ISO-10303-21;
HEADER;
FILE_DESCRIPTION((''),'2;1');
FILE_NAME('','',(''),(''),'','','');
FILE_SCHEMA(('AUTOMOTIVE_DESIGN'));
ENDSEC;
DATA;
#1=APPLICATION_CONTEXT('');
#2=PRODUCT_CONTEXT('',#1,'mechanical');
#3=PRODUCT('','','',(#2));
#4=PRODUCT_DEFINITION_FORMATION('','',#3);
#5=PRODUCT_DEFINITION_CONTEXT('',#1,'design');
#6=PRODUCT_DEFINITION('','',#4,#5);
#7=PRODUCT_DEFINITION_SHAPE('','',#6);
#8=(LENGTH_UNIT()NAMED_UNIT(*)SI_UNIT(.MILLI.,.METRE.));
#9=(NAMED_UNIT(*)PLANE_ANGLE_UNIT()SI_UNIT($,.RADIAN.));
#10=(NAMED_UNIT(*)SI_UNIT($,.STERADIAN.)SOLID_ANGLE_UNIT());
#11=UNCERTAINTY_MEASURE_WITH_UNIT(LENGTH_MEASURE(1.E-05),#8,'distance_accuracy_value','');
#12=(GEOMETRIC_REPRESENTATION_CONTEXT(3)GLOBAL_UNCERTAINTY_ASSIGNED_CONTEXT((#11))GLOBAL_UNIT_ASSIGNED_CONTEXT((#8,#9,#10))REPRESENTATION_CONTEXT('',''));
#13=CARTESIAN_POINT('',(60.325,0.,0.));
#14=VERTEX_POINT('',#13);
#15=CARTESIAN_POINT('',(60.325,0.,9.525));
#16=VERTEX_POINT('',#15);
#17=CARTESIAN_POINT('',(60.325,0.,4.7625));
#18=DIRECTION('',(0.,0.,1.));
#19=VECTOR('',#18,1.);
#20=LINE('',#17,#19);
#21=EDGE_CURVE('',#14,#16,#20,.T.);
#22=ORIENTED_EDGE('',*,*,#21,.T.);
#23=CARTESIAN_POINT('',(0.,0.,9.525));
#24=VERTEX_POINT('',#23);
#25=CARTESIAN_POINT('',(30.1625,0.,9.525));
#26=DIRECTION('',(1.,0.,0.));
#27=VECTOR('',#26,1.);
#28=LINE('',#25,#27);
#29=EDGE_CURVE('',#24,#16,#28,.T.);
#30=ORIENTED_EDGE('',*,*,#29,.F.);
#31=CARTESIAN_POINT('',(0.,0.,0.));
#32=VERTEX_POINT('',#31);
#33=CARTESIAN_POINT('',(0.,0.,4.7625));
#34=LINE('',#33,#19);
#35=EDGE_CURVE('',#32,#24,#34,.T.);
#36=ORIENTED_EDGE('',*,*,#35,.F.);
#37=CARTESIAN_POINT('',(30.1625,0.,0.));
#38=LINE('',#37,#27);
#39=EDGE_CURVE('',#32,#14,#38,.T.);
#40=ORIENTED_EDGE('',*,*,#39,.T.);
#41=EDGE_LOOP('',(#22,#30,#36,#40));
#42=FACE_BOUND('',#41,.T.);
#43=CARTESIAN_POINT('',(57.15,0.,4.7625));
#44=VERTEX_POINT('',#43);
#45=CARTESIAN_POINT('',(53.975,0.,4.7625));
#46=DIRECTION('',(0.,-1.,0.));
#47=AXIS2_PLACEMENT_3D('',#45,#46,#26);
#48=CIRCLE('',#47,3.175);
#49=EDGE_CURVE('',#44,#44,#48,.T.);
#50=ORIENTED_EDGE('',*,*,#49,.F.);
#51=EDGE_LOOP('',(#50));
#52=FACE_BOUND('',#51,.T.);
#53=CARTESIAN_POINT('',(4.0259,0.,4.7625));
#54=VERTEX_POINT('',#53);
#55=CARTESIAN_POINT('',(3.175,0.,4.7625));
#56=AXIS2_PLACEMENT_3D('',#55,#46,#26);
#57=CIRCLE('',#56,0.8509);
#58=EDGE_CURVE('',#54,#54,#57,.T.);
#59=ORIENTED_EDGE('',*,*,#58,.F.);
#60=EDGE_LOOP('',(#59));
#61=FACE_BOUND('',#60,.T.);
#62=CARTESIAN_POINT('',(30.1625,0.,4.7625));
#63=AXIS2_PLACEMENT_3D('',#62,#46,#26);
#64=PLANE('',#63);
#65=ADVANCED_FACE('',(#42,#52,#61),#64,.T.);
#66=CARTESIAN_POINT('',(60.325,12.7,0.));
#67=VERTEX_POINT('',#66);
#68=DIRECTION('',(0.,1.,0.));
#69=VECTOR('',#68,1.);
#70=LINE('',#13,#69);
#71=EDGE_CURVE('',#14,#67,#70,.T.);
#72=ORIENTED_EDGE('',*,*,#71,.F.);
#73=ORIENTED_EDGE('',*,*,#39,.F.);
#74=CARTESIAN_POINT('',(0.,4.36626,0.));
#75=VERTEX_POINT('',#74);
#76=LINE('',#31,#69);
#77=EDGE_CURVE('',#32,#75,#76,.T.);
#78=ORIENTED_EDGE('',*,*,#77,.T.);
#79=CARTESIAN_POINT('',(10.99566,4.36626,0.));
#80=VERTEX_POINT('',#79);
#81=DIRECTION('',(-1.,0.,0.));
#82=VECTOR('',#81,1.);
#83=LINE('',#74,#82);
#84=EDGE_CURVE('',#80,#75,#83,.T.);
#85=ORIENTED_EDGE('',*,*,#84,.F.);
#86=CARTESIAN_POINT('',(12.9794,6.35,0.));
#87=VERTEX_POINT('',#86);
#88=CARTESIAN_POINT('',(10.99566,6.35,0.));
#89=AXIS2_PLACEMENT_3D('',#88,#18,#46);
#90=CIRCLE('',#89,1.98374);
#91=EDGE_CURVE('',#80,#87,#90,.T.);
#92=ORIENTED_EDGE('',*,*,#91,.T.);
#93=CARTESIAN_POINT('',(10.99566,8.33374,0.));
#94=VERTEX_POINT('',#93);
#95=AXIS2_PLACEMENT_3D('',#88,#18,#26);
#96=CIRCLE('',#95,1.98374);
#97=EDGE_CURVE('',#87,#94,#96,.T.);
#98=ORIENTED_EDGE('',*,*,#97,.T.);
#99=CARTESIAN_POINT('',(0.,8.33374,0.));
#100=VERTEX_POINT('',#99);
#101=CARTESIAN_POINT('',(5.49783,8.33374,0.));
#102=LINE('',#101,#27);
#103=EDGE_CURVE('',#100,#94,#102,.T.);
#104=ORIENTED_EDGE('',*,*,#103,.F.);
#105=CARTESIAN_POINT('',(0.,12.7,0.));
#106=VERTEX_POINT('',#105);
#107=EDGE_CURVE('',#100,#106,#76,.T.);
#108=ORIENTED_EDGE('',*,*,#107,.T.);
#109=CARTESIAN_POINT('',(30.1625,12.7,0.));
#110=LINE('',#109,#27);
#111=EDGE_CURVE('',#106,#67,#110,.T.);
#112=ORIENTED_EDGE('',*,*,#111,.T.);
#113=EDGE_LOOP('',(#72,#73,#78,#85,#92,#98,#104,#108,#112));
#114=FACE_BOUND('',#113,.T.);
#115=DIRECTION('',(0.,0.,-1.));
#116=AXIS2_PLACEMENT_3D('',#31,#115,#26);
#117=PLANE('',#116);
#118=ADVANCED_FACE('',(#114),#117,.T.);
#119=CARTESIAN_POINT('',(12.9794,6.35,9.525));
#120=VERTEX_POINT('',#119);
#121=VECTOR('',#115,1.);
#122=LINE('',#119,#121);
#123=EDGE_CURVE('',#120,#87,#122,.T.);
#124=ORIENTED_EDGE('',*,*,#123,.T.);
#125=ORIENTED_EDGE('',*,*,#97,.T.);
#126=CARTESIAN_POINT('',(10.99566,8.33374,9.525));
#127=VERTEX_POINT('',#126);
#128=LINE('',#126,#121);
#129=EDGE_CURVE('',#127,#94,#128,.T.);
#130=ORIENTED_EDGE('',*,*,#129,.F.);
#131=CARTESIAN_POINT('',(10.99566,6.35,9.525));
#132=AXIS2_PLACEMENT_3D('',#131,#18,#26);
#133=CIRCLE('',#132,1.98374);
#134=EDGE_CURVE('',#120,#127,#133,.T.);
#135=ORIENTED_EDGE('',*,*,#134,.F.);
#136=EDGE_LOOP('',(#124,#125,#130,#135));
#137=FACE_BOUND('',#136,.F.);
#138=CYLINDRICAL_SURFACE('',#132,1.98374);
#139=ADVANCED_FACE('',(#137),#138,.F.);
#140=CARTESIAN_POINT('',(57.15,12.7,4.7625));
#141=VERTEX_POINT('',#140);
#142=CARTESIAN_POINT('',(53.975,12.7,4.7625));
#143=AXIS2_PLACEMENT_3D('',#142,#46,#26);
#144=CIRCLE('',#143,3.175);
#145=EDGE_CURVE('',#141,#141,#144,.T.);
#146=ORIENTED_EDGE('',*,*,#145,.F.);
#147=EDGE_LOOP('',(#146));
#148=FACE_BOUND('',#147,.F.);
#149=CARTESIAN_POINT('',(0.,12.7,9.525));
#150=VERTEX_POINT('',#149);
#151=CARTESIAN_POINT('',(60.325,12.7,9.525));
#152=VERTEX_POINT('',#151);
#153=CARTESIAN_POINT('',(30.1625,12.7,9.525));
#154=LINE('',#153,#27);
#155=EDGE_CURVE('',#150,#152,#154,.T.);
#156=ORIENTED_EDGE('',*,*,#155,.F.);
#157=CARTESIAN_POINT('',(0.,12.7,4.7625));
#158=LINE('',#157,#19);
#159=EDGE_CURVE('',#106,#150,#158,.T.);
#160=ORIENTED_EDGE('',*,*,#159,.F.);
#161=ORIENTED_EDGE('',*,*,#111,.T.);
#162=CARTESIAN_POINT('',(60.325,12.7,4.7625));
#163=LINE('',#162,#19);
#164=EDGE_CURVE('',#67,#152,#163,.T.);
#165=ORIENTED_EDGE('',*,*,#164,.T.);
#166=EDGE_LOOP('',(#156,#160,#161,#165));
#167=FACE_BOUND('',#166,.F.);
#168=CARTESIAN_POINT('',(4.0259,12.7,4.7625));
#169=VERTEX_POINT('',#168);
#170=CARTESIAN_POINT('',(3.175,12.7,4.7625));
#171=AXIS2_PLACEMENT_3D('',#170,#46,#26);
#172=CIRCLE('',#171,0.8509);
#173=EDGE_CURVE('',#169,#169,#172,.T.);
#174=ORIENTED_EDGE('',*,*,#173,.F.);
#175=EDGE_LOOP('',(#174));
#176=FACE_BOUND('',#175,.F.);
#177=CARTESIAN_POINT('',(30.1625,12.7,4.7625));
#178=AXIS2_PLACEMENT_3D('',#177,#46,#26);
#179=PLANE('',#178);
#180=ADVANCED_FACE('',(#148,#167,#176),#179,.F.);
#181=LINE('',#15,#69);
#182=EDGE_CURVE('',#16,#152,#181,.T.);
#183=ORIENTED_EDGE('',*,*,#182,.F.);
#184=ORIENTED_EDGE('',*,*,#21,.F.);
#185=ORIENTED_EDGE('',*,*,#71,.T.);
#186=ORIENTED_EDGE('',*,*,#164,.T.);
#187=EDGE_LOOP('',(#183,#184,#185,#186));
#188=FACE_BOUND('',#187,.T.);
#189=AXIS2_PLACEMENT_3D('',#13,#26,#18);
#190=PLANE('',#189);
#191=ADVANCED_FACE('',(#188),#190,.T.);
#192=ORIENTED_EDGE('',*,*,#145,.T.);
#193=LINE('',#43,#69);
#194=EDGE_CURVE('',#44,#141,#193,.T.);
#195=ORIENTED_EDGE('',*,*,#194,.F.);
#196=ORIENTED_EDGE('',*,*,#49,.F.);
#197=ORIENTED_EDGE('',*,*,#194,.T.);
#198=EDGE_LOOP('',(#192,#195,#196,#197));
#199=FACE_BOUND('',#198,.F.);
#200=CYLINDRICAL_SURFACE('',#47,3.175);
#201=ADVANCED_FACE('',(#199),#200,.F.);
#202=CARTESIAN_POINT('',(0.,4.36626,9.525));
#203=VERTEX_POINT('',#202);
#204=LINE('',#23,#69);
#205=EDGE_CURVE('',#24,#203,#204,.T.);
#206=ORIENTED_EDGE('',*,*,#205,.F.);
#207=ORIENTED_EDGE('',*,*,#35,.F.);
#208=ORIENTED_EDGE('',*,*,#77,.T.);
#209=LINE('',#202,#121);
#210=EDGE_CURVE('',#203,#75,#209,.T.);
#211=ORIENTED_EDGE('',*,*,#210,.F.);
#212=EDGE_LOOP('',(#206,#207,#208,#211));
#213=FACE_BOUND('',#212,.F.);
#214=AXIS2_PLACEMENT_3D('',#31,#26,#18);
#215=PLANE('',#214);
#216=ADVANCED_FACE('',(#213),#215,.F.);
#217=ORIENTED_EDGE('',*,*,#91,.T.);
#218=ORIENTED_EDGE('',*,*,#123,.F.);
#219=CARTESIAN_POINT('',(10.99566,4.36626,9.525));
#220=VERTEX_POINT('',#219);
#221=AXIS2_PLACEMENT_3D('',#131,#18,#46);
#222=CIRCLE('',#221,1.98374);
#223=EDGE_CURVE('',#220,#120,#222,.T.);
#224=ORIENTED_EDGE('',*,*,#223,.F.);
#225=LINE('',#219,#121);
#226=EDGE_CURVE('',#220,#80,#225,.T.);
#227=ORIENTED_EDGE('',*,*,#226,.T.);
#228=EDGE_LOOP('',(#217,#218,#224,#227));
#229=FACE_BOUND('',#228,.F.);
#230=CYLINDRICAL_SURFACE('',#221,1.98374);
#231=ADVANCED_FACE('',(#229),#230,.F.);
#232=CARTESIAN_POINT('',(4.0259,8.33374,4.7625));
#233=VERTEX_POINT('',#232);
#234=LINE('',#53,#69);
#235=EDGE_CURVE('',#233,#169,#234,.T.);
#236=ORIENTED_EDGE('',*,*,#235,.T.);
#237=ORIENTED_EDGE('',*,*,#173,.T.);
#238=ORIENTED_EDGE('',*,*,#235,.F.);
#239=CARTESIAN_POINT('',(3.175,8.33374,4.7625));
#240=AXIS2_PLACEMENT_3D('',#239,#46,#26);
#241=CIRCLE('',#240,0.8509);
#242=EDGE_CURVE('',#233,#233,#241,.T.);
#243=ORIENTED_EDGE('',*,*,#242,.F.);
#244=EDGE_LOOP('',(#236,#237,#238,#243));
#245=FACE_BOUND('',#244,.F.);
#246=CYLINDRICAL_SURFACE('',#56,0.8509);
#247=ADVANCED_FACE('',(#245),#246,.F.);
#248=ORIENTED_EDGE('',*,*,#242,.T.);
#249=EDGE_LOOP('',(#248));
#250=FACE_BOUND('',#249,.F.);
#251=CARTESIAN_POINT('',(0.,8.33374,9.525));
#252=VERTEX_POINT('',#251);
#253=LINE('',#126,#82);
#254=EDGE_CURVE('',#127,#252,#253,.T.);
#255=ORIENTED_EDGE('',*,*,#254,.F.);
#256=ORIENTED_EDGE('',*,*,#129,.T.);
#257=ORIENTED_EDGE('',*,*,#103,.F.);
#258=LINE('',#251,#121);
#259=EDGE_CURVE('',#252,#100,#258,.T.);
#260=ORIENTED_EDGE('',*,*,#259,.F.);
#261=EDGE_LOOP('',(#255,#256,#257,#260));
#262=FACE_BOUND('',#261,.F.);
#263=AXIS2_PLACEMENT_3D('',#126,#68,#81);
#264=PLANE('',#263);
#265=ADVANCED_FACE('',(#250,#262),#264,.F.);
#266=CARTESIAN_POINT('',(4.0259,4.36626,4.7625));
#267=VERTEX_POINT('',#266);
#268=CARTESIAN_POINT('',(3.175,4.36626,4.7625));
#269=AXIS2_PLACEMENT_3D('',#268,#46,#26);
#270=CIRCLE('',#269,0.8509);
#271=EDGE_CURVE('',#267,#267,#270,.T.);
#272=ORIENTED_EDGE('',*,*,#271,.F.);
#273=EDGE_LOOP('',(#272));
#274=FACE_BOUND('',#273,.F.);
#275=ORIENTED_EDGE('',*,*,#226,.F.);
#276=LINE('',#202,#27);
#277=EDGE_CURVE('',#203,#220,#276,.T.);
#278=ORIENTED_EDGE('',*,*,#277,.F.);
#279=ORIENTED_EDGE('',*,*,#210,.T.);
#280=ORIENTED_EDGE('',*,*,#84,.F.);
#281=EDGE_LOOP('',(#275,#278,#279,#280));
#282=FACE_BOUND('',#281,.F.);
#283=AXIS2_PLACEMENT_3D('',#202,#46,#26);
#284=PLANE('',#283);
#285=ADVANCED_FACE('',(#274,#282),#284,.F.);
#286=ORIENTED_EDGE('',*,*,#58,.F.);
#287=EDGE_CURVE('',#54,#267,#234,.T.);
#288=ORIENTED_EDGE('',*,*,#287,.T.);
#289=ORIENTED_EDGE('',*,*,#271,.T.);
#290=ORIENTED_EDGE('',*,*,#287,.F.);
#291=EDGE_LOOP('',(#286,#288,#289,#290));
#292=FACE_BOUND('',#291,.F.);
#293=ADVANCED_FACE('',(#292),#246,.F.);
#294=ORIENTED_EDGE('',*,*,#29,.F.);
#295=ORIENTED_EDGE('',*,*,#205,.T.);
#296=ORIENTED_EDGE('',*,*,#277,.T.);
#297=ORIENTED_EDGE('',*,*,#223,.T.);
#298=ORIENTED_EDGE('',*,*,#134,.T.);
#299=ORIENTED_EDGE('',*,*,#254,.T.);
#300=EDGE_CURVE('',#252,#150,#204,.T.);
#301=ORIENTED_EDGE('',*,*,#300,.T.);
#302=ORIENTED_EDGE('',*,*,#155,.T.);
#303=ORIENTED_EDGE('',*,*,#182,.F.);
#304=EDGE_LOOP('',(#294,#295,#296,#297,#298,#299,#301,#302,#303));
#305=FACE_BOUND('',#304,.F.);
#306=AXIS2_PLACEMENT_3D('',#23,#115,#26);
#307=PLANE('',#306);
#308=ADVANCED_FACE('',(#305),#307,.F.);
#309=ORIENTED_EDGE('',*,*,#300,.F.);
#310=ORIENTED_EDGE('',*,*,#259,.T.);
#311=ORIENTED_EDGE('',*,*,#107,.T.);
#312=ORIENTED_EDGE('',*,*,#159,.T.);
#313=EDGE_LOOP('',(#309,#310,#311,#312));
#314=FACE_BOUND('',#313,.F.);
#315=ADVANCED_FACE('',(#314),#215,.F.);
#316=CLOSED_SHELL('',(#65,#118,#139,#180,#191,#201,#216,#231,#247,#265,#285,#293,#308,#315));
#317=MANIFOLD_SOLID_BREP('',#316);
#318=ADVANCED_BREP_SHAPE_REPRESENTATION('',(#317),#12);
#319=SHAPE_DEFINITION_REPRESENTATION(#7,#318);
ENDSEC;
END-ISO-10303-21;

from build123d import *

# Parameters (mm, degrees)
F0_W     = 60.325
F0_H     = 9.525
F0_R     = 0.8509
F0_R_2   = 3.175
F1_DEPTH = 12.7
F3_DEPTH = 9.526


# Not quite as in the source:
# - a feature of the source that left no trace in its solid (it failed there, or was rolled back) is left out


with BuildPart() as f1:
    # F0 (on Front) → F1 (new body)
    with BuildSketch(Plane.XZ):
        with Locations((30.1625, 4.7625)):
            Rectangle(F0_W, F0_H)
        with Locations((3.175, 4.7625)):
            Circle(F0_R, mode=Mode.SUBTRACT)
        with Locations((53.975, 4.7625)):
            Circle(F0_R_2, mode=Mode.SUBTRACT)
    extrude(amount=-F1_DEPTH)

    # F2 (on face) → F3 (cut, through all)
    with BuildSketch(Plane.XY.offset(9.525)):
        with BuildLine():
            Line((10.99566, 8.33374), (0, 8.33374))
            Line((0, 8.33374), (0, 4.36626))
            Line((0, 4.36626), (10.99566, 4.36626))
            ThreePointArc((10.99566, 4.36626), (12.3983760061, 4.9472839939), (12.9794, 6.35))
            ThreePointArc((12.9794, 6.35), (12.3983760061, 7.7527160061), (10.99566, 8.33374))
        make_face()
    extrude(amount=-F3_DEPTH, mode=Mode.SUBTRACT)


solid = f1.part
